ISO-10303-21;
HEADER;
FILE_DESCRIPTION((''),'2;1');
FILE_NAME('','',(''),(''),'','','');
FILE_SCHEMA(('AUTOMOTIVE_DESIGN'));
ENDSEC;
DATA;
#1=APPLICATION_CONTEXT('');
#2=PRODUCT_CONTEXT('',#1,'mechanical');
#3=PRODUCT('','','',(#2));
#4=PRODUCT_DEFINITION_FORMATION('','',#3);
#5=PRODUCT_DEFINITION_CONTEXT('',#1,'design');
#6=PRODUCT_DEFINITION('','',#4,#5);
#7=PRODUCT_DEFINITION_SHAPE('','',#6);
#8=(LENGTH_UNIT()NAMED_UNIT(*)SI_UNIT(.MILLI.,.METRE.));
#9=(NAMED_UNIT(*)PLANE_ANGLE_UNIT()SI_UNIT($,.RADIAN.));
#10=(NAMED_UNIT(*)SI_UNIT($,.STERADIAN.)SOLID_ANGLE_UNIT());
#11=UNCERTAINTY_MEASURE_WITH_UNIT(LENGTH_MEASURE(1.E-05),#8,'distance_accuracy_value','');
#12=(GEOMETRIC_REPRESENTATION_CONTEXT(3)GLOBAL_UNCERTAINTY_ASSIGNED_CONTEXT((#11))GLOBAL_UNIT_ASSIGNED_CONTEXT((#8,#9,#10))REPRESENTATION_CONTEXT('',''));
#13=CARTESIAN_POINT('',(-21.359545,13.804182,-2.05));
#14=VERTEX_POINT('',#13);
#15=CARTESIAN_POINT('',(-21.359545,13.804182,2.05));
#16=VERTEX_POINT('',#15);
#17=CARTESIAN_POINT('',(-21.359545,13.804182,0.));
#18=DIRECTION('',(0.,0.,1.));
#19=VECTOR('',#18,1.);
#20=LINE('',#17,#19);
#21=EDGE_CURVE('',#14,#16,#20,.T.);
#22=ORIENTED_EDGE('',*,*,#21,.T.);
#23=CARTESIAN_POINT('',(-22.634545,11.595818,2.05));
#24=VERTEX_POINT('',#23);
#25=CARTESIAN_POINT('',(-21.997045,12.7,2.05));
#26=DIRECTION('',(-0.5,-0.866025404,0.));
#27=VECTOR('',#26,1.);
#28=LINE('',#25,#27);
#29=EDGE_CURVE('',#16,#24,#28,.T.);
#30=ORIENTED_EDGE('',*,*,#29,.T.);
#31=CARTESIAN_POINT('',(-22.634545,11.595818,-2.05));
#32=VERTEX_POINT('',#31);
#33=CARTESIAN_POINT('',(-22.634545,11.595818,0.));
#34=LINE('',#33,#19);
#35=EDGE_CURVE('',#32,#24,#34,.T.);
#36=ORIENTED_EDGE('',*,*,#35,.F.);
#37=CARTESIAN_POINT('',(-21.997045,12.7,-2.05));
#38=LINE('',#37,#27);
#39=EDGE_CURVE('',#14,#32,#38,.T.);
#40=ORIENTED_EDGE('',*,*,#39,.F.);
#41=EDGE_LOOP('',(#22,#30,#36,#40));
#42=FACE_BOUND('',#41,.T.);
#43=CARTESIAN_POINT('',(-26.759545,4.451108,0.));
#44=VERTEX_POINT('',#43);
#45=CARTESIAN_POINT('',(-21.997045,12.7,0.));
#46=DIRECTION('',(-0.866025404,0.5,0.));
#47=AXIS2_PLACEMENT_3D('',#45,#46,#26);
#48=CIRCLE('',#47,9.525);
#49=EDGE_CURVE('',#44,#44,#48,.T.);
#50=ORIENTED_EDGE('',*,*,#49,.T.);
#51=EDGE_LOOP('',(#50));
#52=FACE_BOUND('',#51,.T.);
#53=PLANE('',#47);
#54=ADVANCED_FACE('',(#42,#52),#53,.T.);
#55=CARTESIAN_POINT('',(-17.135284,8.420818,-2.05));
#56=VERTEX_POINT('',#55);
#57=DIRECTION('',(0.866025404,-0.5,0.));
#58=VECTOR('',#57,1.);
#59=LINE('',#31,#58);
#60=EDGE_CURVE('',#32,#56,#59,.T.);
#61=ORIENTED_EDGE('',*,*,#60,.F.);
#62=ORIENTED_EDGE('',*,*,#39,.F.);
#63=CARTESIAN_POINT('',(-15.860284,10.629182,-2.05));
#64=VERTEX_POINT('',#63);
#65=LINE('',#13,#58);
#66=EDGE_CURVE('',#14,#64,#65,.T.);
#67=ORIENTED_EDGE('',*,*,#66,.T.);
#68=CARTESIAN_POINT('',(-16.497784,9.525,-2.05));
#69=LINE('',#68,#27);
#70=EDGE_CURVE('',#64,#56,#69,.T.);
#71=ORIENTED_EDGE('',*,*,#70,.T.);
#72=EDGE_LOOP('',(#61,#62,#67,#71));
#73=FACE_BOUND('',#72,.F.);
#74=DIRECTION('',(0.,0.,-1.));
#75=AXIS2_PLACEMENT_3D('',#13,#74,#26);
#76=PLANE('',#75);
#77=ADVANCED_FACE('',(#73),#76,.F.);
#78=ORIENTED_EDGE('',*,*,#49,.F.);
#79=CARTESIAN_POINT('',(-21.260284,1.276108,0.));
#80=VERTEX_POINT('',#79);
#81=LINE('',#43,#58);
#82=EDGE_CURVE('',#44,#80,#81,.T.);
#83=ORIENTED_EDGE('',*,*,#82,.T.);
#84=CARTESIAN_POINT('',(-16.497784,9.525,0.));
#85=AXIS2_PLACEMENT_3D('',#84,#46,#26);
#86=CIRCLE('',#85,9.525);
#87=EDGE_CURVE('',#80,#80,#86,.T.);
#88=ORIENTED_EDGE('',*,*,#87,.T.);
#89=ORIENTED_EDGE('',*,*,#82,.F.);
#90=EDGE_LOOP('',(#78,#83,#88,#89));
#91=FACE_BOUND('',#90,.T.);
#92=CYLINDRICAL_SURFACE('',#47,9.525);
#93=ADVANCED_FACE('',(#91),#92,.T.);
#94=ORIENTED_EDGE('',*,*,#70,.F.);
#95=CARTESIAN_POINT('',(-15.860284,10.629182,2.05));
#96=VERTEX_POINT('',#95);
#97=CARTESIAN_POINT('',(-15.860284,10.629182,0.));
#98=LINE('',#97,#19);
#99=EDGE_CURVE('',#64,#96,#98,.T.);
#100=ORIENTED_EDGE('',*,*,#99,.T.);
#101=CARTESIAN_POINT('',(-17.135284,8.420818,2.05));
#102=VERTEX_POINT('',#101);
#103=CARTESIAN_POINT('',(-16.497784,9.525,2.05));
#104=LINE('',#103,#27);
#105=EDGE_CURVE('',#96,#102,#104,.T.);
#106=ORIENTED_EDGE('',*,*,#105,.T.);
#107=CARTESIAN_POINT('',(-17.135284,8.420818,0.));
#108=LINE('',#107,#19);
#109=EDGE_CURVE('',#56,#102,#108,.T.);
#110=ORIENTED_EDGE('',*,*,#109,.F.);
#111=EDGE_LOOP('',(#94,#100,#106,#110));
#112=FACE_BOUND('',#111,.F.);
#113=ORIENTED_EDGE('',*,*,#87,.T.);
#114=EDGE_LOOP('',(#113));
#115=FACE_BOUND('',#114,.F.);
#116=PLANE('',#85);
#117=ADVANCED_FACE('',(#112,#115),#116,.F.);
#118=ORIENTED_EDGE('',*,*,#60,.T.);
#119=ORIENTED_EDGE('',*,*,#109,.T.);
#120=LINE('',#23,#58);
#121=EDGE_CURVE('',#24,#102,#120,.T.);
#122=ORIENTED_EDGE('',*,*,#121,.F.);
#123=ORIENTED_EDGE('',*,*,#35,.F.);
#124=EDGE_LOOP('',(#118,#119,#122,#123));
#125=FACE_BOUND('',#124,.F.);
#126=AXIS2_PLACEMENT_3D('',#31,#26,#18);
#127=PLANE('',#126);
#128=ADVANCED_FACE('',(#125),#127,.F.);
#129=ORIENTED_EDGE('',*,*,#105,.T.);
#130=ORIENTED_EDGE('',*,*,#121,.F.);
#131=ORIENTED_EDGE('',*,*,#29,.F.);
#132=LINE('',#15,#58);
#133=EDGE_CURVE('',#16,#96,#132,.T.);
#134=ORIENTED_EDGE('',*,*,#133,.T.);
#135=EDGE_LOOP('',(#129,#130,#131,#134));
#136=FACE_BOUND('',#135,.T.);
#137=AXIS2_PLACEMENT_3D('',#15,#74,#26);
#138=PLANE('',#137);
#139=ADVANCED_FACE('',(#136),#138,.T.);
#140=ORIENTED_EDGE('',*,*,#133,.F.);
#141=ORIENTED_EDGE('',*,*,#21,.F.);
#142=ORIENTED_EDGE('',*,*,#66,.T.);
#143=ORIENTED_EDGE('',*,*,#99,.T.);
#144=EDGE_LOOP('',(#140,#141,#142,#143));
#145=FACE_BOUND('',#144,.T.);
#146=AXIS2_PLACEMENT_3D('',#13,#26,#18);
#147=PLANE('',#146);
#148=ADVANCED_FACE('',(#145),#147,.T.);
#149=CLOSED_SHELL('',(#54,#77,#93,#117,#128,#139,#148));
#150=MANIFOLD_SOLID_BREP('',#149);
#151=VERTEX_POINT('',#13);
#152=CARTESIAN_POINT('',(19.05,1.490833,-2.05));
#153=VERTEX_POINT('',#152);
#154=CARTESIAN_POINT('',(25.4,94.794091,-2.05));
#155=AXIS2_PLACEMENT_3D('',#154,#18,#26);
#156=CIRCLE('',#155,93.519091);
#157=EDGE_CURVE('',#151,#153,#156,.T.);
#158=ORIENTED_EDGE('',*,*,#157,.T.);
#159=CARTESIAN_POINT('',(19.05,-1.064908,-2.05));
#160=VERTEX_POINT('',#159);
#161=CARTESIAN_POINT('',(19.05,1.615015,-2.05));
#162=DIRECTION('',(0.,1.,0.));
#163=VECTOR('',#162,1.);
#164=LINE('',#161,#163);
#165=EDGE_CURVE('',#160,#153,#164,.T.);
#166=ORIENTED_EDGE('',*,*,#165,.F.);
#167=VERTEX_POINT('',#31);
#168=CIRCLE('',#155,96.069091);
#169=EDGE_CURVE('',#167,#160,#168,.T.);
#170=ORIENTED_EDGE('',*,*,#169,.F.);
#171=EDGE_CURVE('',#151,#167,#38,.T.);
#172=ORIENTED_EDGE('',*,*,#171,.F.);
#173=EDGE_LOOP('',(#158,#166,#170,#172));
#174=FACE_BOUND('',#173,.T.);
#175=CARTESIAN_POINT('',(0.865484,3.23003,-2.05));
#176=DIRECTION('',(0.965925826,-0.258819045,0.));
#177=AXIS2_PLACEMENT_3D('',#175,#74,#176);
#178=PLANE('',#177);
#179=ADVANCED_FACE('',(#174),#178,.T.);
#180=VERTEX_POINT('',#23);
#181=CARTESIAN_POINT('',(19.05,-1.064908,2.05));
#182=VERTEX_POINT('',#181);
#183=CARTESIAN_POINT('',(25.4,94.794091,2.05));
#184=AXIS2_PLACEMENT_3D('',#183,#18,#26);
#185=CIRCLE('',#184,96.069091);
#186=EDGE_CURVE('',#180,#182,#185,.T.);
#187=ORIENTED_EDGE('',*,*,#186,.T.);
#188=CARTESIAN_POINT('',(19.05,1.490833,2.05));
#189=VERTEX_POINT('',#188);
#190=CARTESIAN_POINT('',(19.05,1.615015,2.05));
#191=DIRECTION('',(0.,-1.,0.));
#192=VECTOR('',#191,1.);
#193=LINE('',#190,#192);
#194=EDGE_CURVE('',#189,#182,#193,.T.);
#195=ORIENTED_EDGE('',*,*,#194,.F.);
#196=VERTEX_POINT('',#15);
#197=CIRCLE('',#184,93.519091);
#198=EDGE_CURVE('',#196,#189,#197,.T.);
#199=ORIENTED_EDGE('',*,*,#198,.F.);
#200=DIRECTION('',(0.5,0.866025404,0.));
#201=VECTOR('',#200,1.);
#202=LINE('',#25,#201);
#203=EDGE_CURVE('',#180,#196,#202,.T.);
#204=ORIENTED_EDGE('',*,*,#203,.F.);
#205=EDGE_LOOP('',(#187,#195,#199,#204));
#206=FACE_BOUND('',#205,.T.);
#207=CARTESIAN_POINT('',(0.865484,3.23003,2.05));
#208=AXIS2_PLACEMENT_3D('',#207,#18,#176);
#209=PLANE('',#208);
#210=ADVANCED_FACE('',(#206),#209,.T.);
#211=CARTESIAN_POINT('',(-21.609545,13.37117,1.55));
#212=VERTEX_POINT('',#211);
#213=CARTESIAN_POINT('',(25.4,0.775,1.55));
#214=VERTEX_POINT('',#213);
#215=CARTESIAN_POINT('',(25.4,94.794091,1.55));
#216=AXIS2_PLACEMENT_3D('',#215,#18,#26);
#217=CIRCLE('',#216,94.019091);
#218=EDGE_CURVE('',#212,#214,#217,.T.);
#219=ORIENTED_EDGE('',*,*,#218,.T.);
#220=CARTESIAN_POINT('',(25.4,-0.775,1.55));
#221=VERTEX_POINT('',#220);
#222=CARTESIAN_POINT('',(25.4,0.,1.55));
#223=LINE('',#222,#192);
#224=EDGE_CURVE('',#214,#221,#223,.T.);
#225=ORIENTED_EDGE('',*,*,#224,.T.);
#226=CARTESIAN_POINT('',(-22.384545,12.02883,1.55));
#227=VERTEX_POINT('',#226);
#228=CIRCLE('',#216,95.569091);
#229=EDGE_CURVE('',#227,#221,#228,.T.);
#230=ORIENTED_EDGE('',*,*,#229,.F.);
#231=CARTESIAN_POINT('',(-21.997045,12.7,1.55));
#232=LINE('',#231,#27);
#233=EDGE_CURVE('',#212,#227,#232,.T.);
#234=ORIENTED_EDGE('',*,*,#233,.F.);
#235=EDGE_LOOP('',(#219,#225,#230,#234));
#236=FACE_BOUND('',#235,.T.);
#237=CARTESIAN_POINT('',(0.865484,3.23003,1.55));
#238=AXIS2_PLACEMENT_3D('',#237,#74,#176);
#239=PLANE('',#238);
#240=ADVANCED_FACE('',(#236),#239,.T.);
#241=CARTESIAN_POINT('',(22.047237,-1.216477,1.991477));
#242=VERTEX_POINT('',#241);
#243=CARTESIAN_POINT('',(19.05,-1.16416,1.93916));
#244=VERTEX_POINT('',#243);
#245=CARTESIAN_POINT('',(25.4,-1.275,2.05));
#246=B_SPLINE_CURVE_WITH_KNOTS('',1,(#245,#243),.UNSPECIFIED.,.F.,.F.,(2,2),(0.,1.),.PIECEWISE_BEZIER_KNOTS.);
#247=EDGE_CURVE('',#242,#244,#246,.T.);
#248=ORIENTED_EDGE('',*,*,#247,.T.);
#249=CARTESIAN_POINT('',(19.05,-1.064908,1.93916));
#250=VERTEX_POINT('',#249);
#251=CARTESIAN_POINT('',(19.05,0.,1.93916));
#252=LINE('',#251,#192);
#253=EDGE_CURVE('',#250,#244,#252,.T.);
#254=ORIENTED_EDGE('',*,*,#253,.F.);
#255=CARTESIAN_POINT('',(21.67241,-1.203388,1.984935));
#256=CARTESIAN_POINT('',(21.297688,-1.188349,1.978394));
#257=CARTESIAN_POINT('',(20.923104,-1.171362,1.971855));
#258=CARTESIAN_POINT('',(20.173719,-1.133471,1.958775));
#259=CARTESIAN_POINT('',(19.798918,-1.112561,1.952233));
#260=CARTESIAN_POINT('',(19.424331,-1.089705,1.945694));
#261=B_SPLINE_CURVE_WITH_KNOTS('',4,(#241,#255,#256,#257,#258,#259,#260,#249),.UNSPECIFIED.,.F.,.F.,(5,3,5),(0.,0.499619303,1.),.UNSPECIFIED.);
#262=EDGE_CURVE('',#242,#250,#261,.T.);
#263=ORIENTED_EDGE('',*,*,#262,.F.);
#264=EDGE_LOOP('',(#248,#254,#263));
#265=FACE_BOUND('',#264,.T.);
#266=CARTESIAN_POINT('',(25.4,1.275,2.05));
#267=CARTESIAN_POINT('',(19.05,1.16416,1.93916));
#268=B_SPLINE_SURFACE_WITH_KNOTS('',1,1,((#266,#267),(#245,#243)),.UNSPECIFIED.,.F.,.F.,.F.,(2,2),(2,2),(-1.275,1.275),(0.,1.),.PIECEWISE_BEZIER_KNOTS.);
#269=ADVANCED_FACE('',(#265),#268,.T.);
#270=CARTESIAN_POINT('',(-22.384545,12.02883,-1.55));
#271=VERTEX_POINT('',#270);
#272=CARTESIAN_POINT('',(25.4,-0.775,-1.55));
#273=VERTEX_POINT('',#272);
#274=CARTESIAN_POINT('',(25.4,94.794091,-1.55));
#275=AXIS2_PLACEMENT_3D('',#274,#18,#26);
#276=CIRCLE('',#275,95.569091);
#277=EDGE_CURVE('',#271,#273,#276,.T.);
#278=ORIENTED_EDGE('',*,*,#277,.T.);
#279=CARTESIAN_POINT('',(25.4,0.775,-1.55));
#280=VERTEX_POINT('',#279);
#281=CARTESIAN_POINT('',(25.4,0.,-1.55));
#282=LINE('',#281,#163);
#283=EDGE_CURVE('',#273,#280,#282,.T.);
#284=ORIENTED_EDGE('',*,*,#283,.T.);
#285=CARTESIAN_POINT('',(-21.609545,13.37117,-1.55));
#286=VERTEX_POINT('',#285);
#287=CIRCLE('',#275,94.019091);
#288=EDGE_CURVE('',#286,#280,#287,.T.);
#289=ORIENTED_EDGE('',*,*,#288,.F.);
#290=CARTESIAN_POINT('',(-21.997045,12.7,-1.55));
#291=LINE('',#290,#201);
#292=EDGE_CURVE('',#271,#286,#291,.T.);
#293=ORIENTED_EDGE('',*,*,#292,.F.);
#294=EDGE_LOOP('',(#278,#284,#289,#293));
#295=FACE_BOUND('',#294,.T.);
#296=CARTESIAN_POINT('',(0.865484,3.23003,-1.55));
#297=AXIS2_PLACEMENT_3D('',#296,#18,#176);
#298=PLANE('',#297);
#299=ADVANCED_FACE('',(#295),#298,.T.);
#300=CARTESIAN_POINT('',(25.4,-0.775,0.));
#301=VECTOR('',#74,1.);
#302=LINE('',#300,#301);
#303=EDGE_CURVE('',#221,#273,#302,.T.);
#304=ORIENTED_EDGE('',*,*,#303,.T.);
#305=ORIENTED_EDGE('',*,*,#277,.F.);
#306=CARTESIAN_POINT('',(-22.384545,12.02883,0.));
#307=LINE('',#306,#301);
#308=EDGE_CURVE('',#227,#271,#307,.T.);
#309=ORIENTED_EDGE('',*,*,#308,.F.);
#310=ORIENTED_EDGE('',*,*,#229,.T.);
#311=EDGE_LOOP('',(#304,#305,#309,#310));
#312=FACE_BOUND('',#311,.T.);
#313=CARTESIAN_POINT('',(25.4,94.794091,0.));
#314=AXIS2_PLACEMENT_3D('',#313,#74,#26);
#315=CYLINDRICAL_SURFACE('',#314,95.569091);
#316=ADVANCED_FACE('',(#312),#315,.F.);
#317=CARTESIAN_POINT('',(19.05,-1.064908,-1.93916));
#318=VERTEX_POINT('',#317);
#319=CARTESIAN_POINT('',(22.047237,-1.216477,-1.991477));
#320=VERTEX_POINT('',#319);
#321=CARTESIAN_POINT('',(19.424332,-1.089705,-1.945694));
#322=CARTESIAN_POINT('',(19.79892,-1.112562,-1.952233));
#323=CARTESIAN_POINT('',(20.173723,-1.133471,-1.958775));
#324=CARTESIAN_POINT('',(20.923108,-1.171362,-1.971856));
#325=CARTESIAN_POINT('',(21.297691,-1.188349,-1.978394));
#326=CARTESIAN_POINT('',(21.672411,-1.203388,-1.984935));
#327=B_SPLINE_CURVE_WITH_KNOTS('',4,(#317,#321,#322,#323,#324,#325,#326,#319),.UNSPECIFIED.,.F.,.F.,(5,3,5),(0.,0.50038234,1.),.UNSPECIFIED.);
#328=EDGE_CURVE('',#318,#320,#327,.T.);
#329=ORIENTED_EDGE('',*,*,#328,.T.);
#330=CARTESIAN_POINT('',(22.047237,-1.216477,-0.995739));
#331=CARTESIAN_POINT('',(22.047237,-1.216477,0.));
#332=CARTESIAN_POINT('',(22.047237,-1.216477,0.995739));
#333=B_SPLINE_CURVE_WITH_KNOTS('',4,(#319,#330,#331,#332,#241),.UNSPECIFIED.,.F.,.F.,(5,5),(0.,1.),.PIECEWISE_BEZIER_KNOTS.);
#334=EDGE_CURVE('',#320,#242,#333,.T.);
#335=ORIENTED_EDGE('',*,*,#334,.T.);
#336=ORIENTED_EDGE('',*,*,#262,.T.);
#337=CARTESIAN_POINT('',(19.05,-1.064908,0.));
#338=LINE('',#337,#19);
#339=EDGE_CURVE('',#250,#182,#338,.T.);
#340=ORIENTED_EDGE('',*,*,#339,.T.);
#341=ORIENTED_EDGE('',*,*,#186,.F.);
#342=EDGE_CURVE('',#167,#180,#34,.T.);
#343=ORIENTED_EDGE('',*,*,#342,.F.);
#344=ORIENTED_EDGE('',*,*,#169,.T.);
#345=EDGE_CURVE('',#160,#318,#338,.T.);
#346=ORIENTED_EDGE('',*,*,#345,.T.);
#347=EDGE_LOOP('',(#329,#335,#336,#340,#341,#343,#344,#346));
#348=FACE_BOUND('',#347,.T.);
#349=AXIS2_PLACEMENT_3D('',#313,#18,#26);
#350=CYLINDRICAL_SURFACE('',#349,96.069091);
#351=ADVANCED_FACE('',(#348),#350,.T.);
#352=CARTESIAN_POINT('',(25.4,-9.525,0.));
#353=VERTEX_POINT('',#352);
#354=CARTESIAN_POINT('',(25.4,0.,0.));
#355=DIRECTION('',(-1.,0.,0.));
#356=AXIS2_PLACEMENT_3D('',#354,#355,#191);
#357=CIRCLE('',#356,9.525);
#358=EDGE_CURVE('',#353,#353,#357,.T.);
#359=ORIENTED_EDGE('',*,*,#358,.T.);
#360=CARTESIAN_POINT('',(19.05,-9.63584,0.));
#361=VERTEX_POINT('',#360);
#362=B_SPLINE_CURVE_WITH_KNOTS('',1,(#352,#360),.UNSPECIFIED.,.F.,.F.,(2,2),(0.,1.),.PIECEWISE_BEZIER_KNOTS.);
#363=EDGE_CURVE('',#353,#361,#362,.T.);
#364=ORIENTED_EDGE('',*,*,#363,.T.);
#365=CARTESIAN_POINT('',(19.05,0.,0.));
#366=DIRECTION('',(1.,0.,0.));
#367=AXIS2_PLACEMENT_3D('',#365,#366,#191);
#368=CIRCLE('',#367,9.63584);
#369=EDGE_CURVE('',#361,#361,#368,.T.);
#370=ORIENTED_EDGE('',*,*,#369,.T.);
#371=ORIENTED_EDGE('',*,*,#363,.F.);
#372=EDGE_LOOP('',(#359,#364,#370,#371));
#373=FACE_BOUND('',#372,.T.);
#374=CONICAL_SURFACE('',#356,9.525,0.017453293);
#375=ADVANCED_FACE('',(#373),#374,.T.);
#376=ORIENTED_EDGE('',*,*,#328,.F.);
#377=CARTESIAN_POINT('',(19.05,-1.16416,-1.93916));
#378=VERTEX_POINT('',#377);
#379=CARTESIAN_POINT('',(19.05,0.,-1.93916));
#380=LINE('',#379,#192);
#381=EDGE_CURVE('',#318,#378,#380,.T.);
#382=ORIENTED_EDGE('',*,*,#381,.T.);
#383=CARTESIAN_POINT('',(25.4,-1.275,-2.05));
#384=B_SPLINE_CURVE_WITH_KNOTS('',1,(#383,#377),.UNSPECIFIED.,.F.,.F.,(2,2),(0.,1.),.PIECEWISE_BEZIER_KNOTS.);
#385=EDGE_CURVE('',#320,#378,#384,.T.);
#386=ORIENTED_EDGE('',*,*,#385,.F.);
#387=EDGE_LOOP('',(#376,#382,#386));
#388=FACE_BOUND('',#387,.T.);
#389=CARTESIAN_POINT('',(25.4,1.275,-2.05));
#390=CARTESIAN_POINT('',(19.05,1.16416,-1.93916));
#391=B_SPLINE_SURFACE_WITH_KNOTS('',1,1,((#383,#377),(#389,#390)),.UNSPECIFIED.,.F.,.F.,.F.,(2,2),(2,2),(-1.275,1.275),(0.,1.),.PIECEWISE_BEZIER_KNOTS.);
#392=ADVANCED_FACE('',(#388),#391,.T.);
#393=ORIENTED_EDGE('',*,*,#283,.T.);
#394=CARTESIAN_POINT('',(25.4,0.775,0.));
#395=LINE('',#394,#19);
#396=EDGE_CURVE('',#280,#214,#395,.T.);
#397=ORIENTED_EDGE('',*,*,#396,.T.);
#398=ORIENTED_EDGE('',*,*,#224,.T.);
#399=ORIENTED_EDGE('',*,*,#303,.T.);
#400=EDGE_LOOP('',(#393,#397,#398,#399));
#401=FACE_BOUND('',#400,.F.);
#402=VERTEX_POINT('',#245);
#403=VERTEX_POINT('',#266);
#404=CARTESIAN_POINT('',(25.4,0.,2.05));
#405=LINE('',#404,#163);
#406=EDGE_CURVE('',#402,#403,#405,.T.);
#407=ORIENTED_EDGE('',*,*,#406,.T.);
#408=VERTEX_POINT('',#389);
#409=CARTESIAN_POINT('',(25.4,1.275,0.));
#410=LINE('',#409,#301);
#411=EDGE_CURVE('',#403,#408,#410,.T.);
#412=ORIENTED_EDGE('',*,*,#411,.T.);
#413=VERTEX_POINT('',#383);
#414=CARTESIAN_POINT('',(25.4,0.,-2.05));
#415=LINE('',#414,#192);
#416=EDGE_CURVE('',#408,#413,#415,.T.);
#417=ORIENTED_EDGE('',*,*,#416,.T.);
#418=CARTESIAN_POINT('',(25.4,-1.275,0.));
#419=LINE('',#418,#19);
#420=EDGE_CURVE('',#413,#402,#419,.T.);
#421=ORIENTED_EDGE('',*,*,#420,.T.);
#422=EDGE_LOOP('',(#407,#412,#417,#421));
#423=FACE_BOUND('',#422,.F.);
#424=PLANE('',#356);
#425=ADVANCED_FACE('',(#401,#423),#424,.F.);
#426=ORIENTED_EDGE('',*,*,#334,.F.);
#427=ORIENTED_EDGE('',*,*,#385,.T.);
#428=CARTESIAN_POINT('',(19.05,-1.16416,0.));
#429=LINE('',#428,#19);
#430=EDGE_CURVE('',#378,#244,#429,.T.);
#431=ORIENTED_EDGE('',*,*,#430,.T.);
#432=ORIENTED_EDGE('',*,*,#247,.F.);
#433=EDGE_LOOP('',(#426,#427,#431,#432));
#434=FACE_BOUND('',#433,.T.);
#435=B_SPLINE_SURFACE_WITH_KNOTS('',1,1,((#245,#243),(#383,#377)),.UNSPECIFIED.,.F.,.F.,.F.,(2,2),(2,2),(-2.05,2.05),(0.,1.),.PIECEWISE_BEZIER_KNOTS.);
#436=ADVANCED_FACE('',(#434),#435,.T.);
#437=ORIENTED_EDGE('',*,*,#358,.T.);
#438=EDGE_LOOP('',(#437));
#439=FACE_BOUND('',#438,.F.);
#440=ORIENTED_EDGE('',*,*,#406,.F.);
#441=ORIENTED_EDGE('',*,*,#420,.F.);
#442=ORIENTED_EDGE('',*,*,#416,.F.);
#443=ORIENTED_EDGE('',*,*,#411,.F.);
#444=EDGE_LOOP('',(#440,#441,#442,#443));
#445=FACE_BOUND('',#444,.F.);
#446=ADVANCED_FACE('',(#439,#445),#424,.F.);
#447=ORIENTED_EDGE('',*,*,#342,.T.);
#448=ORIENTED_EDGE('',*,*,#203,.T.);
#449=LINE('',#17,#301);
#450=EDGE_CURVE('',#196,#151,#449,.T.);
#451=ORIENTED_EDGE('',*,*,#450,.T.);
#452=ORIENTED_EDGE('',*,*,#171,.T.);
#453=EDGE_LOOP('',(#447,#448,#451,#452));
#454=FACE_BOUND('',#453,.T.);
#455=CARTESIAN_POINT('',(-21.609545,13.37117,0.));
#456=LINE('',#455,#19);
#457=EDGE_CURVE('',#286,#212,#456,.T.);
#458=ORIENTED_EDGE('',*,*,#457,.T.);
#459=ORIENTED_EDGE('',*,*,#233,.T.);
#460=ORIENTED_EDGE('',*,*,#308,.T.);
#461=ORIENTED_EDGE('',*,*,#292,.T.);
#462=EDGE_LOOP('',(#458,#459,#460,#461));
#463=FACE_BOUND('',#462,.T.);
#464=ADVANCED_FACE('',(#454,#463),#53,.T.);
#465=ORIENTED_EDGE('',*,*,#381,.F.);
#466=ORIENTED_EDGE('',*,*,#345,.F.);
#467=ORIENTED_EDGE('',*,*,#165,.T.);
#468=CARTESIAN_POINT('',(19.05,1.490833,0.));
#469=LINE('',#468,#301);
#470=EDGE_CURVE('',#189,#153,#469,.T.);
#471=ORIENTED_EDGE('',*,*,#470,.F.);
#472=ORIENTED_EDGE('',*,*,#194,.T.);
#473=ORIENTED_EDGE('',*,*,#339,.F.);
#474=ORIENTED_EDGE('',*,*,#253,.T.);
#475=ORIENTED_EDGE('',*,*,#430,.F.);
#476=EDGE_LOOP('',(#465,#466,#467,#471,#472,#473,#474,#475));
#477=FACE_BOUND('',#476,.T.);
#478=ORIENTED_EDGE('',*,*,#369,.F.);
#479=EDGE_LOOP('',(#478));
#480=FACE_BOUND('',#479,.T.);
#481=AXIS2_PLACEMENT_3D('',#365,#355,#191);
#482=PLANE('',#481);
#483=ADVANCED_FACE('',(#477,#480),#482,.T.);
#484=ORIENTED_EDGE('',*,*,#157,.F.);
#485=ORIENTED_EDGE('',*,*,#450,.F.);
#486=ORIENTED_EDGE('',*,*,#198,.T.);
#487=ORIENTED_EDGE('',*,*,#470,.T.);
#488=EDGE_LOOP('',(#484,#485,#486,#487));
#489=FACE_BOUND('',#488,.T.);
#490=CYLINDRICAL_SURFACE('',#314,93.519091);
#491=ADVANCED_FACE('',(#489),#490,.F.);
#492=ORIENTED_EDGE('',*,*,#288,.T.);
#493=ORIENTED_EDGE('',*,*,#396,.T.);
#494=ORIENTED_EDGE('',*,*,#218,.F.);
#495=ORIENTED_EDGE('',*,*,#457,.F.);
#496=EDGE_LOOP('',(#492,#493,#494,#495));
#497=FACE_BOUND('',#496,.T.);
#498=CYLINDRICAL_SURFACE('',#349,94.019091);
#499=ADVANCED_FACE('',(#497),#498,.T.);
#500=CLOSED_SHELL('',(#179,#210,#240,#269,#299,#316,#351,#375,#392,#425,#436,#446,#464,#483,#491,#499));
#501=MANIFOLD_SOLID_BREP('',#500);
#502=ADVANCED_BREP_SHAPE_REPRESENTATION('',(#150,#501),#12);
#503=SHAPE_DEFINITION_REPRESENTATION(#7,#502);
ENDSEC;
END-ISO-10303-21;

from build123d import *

# Parameters (mm, degrees)
F4_W     = 2.55
F4_H     = 4.1
F4_W_2   = 1.55
F4_H_2   = 3.1
F3_W     = 2.55
F3_H     = 4.1
F3_W_2   = 1.55
F3_H_2   = 3.1
F3_R     = 9.525
F7_DEPTH = 6.35
F4_R     = 9.525
F8_DEPTH = 6.35
F8_TAPER = -1


# Not quite as in the source:
# - a feature of the source that left no trace in its solid (it failed there, or was rolled back) is left out


with BuildPart() as f5:
    # F5: sweep along a path in F0
    with BuildLine(Plane.XY) as f5_path:
        ThreePointArc((-21.9970452561, 12.7), (0.8654840123, 3.2300303069), (25.4, 0))
    # F4 (on line) + F3 (on line) → F5 (sweep)
    with BuildSketch(Plane(origin=(25.4, 0, 0), x_dir=(0, -1, 0), z_dir=(-1, 0, 0))):
        Rectangle(F4_W, F4_H)
        Rectangle(F4_W_2, F4_H_2, mode=Mode.SUBTRACT)
    with BuildSketch(Plane(origin=(-21.9970452561, 12.7, 0), x_dir=(-0.5, -0.8660254038, 0), z_dir=(-0.8660254038, 0.5, 0))):
        Rectangle(F3_W, F3_H)
        Rectangle(F3_W_2, F3_H_2, mode=Mode.SUBTRACT)
    sweep(path=f5_path.line)

    # F4 (on line) → F8 (join)
    with BuildSketch(Plane(origin=(25.4, 0, 0), x_dir=(0, -1, 0), z_dir=(-1, 0, 0))):
        Circle(F4_R)
        Rectangle(F4_W, F4_H, mode=Mode.SUBTRACT)
    extrude(amount=F8_DEPTH, taper=F8_TAPER)


with BuildPart() as f7:
    # F3 (on line) → F7 (new body)
    with BuildSketch(Plane(origin=(-21.9970452561, 12.7, 0), x_dir=(-0.5, -0.8660254038, 0), z_dir=(-0.8660254038, 0.5, 0))):
        Circle(F3_R)
        Rectangle(F3_W, F3_H, mode=Mode.SUBTRACT)
    extrude(amount=-F7_DEPTH)


solid = Compound([f5.part, f7.part])
